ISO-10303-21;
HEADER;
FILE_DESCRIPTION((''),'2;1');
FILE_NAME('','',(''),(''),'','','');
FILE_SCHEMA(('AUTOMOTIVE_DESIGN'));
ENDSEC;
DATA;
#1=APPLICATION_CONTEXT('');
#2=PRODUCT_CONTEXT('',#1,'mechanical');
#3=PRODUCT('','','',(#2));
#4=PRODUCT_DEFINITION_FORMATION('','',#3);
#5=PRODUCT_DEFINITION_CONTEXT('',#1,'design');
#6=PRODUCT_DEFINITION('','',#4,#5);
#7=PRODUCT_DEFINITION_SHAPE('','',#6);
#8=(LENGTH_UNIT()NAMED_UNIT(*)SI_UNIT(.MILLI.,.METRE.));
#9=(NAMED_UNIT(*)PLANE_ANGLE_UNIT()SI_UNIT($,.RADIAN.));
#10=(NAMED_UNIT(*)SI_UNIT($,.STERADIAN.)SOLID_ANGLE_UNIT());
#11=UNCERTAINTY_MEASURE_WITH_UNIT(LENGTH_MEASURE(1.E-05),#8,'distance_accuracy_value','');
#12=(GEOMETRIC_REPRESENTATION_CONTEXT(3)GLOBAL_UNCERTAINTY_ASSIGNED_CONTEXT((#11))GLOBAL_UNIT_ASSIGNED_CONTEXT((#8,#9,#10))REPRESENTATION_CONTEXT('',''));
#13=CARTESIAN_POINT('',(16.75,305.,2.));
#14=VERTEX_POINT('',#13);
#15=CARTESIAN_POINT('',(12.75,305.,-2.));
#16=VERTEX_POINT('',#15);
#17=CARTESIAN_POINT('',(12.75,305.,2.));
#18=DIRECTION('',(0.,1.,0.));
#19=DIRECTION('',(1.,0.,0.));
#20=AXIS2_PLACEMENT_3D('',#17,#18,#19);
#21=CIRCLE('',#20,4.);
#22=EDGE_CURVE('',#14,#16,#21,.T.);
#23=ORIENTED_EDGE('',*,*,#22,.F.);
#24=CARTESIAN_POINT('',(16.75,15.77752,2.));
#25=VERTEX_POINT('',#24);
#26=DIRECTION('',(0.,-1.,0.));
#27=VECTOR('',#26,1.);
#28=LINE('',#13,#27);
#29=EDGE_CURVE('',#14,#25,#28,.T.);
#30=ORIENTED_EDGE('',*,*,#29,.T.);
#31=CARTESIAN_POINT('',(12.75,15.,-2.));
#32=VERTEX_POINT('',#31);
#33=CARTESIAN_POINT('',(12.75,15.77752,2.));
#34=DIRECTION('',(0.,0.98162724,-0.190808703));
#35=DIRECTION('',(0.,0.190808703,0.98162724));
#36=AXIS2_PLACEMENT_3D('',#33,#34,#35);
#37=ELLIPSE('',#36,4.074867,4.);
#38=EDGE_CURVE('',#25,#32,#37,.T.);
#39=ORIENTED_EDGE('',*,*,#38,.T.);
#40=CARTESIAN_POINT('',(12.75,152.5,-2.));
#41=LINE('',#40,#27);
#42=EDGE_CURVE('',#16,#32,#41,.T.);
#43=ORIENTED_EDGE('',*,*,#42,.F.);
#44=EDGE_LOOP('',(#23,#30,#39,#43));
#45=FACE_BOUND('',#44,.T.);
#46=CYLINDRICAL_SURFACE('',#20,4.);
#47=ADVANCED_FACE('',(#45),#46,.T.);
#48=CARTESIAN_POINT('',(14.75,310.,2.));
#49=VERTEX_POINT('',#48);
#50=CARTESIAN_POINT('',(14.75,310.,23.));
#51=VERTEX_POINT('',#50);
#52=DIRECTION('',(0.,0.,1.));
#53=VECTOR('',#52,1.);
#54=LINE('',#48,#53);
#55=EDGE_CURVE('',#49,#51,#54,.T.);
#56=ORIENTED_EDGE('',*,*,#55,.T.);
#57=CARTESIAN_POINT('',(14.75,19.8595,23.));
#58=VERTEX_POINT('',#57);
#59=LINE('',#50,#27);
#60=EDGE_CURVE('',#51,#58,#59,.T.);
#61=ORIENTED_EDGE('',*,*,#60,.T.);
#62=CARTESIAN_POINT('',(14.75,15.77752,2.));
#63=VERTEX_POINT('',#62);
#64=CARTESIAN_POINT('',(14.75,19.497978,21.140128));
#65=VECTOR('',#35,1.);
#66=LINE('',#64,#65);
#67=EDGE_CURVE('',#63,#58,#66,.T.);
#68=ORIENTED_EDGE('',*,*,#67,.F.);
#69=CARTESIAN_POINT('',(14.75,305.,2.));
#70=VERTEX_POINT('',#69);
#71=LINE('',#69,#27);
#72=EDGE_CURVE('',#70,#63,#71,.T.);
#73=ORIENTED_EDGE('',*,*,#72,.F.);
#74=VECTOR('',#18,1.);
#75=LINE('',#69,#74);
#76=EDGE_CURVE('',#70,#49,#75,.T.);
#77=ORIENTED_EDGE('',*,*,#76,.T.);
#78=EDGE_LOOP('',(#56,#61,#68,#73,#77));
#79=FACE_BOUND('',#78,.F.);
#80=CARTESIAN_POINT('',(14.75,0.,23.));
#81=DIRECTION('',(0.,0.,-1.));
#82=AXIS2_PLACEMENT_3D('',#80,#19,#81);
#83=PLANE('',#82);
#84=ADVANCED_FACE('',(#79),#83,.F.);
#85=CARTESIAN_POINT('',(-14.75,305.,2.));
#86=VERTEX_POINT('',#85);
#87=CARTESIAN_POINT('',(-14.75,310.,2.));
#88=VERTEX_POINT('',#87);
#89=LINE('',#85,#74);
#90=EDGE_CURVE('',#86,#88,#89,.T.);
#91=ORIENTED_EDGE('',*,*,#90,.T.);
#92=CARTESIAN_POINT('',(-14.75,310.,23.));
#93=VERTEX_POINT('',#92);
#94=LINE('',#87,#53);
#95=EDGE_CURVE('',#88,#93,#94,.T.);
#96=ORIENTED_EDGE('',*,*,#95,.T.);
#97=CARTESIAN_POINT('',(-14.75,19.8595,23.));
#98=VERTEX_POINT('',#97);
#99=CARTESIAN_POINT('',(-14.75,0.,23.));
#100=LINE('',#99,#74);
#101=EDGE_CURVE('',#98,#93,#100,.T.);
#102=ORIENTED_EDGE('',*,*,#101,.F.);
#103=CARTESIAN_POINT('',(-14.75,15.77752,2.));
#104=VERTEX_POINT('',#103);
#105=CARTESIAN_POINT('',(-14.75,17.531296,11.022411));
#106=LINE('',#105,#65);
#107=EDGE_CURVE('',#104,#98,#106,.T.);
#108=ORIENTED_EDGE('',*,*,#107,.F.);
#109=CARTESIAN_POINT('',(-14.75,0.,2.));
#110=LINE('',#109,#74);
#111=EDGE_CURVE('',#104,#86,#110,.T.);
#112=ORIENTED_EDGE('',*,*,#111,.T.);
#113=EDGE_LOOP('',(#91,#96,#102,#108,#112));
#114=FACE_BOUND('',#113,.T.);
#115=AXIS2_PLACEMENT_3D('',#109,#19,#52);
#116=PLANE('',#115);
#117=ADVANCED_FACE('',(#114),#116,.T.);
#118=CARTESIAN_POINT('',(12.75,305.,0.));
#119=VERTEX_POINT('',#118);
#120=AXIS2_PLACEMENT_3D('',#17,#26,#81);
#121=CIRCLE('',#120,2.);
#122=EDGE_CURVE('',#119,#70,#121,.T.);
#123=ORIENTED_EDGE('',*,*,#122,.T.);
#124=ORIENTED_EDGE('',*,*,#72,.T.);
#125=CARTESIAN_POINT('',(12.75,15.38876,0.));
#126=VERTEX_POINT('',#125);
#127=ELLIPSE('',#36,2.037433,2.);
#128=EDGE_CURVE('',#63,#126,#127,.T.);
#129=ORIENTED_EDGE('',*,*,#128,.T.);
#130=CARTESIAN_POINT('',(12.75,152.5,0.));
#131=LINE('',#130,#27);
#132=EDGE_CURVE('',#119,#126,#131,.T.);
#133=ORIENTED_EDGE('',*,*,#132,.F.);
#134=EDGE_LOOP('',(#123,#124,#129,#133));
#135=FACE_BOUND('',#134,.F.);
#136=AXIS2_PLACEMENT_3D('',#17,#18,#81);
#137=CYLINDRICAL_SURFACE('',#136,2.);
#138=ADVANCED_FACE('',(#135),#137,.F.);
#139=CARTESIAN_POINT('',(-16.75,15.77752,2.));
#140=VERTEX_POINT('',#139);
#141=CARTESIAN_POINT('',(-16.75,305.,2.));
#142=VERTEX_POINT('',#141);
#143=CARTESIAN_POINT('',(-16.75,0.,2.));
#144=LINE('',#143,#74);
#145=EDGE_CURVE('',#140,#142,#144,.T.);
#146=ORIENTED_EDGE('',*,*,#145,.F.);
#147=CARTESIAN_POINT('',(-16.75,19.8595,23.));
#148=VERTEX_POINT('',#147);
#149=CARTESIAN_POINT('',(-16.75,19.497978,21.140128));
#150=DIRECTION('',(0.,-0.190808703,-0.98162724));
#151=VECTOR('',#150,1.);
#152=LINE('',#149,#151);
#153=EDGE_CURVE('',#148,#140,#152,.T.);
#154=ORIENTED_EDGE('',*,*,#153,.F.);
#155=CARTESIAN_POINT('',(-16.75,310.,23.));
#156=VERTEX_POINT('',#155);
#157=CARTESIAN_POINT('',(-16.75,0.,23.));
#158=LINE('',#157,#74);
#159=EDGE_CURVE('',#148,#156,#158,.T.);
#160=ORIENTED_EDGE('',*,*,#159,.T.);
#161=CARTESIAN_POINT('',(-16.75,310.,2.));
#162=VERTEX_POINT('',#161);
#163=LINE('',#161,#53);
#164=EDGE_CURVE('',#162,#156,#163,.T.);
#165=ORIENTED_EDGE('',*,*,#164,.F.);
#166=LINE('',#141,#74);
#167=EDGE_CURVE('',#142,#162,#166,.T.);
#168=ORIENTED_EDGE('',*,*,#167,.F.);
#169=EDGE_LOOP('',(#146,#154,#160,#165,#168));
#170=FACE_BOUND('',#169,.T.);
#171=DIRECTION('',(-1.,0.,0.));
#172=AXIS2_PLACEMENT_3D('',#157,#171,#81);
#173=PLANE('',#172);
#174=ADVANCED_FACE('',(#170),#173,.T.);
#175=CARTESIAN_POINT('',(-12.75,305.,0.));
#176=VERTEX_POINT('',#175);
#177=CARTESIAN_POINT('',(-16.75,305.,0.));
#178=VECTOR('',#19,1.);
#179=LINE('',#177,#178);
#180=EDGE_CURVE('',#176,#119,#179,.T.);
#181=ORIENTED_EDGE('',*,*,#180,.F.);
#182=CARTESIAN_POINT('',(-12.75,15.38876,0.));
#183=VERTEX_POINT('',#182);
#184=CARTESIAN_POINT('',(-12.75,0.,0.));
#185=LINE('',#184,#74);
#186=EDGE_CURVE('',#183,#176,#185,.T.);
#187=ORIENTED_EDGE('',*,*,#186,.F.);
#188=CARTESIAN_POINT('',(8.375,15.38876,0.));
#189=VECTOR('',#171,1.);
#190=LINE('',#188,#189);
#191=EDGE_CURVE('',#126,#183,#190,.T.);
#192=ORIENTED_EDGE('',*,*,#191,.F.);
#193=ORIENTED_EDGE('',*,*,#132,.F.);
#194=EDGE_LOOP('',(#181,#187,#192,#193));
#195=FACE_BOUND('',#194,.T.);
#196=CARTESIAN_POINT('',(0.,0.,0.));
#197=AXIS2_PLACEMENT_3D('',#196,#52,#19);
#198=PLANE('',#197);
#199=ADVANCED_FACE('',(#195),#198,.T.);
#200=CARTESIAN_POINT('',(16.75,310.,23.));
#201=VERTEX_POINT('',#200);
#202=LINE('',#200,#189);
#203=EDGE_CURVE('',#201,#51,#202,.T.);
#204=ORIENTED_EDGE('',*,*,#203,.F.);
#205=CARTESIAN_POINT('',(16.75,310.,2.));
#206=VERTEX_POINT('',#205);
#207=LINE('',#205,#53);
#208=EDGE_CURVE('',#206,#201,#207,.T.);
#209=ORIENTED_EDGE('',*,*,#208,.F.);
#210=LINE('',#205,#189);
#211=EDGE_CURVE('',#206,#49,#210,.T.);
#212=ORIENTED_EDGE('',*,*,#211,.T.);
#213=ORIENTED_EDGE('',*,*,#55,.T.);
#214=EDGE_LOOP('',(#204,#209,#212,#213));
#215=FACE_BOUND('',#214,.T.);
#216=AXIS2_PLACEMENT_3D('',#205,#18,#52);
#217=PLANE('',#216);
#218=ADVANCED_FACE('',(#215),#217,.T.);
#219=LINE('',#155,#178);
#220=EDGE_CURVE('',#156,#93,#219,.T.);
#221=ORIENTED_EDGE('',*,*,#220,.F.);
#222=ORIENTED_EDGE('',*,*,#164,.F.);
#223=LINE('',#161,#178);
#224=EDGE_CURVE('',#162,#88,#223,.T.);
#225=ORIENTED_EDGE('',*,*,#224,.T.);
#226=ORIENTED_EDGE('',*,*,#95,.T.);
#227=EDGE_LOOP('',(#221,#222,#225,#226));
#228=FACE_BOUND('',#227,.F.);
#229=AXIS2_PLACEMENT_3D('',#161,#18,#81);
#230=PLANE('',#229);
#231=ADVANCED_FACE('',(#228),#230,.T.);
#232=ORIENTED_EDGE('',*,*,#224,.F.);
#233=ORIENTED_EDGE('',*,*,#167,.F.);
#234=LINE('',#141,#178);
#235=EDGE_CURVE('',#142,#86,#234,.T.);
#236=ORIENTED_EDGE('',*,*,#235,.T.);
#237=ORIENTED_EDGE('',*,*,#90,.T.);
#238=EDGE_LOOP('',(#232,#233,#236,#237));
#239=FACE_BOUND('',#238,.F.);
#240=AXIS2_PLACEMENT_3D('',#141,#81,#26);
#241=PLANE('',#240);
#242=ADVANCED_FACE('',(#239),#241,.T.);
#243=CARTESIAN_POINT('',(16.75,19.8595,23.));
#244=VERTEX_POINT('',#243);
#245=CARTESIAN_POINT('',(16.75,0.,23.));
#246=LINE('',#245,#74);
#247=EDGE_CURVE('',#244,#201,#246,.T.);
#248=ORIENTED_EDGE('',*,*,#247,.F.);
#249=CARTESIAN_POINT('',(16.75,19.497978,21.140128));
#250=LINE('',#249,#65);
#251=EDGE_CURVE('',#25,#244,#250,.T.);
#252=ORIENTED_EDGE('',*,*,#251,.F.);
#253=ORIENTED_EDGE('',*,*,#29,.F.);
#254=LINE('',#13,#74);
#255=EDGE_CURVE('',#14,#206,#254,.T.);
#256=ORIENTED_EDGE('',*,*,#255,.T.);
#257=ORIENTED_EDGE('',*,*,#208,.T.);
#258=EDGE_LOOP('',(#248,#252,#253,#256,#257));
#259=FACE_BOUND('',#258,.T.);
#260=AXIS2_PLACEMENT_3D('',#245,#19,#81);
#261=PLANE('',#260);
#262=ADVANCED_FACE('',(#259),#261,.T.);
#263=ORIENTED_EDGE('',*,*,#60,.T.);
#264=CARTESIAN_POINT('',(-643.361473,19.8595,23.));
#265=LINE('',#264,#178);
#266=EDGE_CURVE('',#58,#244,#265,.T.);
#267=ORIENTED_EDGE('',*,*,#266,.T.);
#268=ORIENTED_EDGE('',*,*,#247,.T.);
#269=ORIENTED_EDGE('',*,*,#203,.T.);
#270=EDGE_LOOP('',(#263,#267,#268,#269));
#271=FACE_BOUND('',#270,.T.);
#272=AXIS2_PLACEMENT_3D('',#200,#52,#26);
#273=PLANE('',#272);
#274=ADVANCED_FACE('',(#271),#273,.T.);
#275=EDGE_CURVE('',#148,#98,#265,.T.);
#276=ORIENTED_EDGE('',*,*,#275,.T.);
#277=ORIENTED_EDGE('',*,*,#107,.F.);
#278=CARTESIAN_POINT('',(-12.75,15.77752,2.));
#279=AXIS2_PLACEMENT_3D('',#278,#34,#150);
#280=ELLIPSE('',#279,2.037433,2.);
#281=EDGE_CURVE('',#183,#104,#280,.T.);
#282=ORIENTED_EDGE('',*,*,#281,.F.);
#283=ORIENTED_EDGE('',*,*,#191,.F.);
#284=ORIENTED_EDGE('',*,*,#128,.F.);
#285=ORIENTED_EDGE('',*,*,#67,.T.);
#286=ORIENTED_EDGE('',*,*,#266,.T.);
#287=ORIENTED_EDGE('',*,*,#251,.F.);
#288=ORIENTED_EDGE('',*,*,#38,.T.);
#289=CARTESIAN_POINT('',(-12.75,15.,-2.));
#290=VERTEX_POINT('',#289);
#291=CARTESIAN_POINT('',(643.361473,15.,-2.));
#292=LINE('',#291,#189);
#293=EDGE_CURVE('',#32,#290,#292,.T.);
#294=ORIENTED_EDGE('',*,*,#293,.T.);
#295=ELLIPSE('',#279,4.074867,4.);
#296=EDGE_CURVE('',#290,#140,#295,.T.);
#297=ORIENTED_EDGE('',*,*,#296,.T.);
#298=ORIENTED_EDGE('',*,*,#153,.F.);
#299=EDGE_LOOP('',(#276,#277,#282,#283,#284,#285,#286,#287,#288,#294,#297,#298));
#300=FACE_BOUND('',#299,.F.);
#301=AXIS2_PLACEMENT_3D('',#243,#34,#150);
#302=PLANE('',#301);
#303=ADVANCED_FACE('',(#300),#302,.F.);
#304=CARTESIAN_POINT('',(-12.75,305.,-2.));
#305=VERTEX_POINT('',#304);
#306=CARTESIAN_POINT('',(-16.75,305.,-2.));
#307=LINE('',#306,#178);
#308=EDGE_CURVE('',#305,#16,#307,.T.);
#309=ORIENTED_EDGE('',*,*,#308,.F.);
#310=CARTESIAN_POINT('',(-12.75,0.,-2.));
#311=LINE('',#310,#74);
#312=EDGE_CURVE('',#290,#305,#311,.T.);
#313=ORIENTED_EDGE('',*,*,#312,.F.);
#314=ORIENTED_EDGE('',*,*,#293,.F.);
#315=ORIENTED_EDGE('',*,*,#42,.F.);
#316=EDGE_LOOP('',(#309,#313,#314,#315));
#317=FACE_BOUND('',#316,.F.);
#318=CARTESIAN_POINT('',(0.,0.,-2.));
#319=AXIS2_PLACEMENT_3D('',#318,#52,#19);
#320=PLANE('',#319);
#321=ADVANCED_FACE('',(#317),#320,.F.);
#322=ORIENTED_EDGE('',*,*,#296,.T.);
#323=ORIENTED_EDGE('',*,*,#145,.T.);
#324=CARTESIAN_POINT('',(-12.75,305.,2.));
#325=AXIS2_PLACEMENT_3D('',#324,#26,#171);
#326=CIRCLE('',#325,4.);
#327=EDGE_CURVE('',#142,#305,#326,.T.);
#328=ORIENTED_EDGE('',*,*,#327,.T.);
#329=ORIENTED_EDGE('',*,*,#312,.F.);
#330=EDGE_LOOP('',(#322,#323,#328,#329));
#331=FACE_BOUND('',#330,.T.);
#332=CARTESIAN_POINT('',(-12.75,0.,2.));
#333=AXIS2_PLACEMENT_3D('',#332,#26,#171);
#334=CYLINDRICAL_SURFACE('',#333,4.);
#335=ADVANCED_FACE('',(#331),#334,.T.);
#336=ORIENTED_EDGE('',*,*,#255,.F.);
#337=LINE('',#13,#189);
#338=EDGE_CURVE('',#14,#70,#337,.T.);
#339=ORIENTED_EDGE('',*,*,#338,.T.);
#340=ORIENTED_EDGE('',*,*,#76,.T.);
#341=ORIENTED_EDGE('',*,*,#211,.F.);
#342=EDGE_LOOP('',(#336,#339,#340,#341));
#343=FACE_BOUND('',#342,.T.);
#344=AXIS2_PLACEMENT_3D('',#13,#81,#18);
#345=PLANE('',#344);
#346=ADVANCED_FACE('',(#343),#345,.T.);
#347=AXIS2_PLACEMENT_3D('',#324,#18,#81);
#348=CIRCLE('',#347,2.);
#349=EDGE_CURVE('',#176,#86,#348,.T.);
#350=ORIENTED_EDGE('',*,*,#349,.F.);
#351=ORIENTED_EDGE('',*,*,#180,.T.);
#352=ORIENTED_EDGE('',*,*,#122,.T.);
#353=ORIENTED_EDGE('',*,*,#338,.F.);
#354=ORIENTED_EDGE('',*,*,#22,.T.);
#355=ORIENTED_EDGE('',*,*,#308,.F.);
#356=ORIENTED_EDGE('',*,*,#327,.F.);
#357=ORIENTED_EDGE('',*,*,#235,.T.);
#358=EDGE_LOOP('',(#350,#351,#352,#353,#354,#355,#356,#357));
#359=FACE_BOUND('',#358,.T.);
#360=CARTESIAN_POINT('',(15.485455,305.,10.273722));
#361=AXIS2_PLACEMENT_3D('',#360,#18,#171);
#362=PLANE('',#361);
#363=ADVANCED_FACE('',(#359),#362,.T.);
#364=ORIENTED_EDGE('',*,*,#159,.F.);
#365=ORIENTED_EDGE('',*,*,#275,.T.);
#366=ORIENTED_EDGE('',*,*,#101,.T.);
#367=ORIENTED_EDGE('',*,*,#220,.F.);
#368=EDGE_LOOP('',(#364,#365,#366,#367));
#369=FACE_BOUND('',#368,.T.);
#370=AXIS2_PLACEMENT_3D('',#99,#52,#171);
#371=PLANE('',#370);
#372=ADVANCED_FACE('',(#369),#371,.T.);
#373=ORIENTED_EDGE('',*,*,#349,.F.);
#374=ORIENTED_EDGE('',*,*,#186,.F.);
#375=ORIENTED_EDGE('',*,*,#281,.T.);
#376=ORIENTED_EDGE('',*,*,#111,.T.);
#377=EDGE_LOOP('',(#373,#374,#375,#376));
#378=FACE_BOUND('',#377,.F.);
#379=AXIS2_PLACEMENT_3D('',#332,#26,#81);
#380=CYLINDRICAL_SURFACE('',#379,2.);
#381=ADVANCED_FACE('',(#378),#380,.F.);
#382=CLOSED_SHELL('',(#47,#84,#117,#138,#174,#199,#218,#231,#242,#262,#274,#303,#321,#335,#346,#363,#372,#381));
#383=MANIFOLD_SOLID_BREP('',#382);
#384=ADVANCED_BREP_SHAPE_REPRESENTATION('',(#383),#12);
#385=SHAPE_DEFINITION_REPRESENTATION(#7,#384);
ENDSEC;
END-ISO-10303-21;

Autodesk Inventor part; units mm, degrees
ref_plane "YZ Plane" through (0, 0, 0) normal (1, 0, 0) x (0, 1, 0)
ref_plane "XZ Plane" through (0, 0, 0) normal (0, 1, 0) x (-1, 0, 0)
ref_plane "XY Plane" through (0, 0, 0) normal (0, 0, 1) x (1, 0, 0)
sketch "Sketch1" plane through (0, 0, 0) normal (0, 0, 1) x (1, 0, 0)
  line L0 (-16.75, 305) -> (16.75, 305)
  line L1 (16.75, 305) -> (16.75, 0)
  line L2 (16.75, 0) -> (-16.75, 0)
  line L3 (-16.75, 0) -> (-16.75, 305)
  point P0 (0, 0)
  point P1 (0, 0)
  point P2 (0, 0)
  point P3 (0, 0)
  point P4 (0, 0)
  dimension "d27" = 33.5
  dimension "d29" = 305
extrude "Plate1" add sketch "Sketch1" against normal blind 2
sketch "Sketch2" plane through (14.75, 305, -2) normal (1, 0, 0) x (0, 1, 0)
  line L0 (-305, 0) -> (0, 0)
  line L1 (0, 0) -> (0, 25)
  line L2 (0, 25) -> (-305, 25)
  line L3 (-305, 25) -> (-305, 0)
edge flange "Flange1" height 25 angle 90 thickness 2 bend radius 2 thickness toward (1, 0, 0) relief tear relief width 2 relief depth 1 corner gap 2 corner form 0 edges at (16.75, 152.5, 0) (-16.75, 152.5, 0) wall of the first edge with corners at (14.75, 0, -2) (14.75, 305, -2) (14.75, 305, 23) (14.75, 0, 23)
bend "Bend1"
corner "Corner1"
sketch "Sketch3" plane through (16.75, 0, 23) normal (1, 0, 0) x (0, 0, -1)
  line L0 (0, 305) -> (21, 305)
  line L1 (21, 305) -> (21, 0)
  line L2 (21, 305) -> (21, 310)
  line L3 (21, 310) -> (0, 310)
  line L4 (0, 310) -> (0, 305)
  point P0 (23, 0)
  dimension "d40" = 5
sheet face with bend "Face2" sketch "Sketch3" thickness 2 toward (-1, 0, 0) bend radius 2
bend "Bend2"
mirror "Mirror1" about plane through (0, 0, 0) normal (1, 0, 0)
sketch "Sketch4" plane through (16.75, 0, 23) normal (1, 0, 0) x (0, 0, -1)
  line L0 (0, 310) -> (0, 0) projected
  line L1 (0, 19.8595) -> (25, 15)
  line L2 (25, 305) -> (25, 0) projected
  line L3 (25, 0) -> (0, 0)
  line L4 (21, 310) -> (0, 310) projected
  point P0 (23, 0)
  dimension "d46" = 295
  dimension "d47" = 11
extrude "Extrusion1" cut sketch "Sketch4" along normal through all both and the other way through all
equation "\"d47\" = wheel_pin_Angle"
equation "\"d15\" = Thickness"
equation "\"d30\" = BendReliefWidth"
equation "\"d31\" = BendReliefDepth"
equation "\"d32\" = MinimumRemnant"
equation "\"d33\" = TransitionRadius"
equation "\"d34\" = wheel_pin_h"
equation "\"d36\" = BendRadius"
equation "\"d37\" = CornerReliefSize"
equation "\"d38\" = GapSize"
equation "\"d39\" = JacobiRadiusSize"
equation "\"GapSize\" = Thickness"
equation "\"BendRadius\" = Thickness"
equation "\"MinimumRemnant\" = 2 * Thickness"
equation "\"BendReliefDepth\" = 0.5 * Thickness"
equation "\"BendReliefWidth\" = Thickness"
equation "\"CornerReliefSize\" = 4 * Thickness"
equation "\"JacobiRadiusSize\" = BendRadius"
equation "\"TransitionRadius\" = BendRadius"
equation "\"d41\" = BendRadius"
equation "\"d42\" = BendReliefWidth"
equation "\"d44\" = MinimumRemnant"
equation "\"d43\" = BendReliefDepth"
equation "\"d45\" = TransitionRadius"
equation "\"wheel_pin_Angle\" = 11deg"
equation "\"Thickness\" = 2"
equation "\"wheel_pin_h\" = 25"
properties part number "DMF v2.1 gear wheel pin 1"
